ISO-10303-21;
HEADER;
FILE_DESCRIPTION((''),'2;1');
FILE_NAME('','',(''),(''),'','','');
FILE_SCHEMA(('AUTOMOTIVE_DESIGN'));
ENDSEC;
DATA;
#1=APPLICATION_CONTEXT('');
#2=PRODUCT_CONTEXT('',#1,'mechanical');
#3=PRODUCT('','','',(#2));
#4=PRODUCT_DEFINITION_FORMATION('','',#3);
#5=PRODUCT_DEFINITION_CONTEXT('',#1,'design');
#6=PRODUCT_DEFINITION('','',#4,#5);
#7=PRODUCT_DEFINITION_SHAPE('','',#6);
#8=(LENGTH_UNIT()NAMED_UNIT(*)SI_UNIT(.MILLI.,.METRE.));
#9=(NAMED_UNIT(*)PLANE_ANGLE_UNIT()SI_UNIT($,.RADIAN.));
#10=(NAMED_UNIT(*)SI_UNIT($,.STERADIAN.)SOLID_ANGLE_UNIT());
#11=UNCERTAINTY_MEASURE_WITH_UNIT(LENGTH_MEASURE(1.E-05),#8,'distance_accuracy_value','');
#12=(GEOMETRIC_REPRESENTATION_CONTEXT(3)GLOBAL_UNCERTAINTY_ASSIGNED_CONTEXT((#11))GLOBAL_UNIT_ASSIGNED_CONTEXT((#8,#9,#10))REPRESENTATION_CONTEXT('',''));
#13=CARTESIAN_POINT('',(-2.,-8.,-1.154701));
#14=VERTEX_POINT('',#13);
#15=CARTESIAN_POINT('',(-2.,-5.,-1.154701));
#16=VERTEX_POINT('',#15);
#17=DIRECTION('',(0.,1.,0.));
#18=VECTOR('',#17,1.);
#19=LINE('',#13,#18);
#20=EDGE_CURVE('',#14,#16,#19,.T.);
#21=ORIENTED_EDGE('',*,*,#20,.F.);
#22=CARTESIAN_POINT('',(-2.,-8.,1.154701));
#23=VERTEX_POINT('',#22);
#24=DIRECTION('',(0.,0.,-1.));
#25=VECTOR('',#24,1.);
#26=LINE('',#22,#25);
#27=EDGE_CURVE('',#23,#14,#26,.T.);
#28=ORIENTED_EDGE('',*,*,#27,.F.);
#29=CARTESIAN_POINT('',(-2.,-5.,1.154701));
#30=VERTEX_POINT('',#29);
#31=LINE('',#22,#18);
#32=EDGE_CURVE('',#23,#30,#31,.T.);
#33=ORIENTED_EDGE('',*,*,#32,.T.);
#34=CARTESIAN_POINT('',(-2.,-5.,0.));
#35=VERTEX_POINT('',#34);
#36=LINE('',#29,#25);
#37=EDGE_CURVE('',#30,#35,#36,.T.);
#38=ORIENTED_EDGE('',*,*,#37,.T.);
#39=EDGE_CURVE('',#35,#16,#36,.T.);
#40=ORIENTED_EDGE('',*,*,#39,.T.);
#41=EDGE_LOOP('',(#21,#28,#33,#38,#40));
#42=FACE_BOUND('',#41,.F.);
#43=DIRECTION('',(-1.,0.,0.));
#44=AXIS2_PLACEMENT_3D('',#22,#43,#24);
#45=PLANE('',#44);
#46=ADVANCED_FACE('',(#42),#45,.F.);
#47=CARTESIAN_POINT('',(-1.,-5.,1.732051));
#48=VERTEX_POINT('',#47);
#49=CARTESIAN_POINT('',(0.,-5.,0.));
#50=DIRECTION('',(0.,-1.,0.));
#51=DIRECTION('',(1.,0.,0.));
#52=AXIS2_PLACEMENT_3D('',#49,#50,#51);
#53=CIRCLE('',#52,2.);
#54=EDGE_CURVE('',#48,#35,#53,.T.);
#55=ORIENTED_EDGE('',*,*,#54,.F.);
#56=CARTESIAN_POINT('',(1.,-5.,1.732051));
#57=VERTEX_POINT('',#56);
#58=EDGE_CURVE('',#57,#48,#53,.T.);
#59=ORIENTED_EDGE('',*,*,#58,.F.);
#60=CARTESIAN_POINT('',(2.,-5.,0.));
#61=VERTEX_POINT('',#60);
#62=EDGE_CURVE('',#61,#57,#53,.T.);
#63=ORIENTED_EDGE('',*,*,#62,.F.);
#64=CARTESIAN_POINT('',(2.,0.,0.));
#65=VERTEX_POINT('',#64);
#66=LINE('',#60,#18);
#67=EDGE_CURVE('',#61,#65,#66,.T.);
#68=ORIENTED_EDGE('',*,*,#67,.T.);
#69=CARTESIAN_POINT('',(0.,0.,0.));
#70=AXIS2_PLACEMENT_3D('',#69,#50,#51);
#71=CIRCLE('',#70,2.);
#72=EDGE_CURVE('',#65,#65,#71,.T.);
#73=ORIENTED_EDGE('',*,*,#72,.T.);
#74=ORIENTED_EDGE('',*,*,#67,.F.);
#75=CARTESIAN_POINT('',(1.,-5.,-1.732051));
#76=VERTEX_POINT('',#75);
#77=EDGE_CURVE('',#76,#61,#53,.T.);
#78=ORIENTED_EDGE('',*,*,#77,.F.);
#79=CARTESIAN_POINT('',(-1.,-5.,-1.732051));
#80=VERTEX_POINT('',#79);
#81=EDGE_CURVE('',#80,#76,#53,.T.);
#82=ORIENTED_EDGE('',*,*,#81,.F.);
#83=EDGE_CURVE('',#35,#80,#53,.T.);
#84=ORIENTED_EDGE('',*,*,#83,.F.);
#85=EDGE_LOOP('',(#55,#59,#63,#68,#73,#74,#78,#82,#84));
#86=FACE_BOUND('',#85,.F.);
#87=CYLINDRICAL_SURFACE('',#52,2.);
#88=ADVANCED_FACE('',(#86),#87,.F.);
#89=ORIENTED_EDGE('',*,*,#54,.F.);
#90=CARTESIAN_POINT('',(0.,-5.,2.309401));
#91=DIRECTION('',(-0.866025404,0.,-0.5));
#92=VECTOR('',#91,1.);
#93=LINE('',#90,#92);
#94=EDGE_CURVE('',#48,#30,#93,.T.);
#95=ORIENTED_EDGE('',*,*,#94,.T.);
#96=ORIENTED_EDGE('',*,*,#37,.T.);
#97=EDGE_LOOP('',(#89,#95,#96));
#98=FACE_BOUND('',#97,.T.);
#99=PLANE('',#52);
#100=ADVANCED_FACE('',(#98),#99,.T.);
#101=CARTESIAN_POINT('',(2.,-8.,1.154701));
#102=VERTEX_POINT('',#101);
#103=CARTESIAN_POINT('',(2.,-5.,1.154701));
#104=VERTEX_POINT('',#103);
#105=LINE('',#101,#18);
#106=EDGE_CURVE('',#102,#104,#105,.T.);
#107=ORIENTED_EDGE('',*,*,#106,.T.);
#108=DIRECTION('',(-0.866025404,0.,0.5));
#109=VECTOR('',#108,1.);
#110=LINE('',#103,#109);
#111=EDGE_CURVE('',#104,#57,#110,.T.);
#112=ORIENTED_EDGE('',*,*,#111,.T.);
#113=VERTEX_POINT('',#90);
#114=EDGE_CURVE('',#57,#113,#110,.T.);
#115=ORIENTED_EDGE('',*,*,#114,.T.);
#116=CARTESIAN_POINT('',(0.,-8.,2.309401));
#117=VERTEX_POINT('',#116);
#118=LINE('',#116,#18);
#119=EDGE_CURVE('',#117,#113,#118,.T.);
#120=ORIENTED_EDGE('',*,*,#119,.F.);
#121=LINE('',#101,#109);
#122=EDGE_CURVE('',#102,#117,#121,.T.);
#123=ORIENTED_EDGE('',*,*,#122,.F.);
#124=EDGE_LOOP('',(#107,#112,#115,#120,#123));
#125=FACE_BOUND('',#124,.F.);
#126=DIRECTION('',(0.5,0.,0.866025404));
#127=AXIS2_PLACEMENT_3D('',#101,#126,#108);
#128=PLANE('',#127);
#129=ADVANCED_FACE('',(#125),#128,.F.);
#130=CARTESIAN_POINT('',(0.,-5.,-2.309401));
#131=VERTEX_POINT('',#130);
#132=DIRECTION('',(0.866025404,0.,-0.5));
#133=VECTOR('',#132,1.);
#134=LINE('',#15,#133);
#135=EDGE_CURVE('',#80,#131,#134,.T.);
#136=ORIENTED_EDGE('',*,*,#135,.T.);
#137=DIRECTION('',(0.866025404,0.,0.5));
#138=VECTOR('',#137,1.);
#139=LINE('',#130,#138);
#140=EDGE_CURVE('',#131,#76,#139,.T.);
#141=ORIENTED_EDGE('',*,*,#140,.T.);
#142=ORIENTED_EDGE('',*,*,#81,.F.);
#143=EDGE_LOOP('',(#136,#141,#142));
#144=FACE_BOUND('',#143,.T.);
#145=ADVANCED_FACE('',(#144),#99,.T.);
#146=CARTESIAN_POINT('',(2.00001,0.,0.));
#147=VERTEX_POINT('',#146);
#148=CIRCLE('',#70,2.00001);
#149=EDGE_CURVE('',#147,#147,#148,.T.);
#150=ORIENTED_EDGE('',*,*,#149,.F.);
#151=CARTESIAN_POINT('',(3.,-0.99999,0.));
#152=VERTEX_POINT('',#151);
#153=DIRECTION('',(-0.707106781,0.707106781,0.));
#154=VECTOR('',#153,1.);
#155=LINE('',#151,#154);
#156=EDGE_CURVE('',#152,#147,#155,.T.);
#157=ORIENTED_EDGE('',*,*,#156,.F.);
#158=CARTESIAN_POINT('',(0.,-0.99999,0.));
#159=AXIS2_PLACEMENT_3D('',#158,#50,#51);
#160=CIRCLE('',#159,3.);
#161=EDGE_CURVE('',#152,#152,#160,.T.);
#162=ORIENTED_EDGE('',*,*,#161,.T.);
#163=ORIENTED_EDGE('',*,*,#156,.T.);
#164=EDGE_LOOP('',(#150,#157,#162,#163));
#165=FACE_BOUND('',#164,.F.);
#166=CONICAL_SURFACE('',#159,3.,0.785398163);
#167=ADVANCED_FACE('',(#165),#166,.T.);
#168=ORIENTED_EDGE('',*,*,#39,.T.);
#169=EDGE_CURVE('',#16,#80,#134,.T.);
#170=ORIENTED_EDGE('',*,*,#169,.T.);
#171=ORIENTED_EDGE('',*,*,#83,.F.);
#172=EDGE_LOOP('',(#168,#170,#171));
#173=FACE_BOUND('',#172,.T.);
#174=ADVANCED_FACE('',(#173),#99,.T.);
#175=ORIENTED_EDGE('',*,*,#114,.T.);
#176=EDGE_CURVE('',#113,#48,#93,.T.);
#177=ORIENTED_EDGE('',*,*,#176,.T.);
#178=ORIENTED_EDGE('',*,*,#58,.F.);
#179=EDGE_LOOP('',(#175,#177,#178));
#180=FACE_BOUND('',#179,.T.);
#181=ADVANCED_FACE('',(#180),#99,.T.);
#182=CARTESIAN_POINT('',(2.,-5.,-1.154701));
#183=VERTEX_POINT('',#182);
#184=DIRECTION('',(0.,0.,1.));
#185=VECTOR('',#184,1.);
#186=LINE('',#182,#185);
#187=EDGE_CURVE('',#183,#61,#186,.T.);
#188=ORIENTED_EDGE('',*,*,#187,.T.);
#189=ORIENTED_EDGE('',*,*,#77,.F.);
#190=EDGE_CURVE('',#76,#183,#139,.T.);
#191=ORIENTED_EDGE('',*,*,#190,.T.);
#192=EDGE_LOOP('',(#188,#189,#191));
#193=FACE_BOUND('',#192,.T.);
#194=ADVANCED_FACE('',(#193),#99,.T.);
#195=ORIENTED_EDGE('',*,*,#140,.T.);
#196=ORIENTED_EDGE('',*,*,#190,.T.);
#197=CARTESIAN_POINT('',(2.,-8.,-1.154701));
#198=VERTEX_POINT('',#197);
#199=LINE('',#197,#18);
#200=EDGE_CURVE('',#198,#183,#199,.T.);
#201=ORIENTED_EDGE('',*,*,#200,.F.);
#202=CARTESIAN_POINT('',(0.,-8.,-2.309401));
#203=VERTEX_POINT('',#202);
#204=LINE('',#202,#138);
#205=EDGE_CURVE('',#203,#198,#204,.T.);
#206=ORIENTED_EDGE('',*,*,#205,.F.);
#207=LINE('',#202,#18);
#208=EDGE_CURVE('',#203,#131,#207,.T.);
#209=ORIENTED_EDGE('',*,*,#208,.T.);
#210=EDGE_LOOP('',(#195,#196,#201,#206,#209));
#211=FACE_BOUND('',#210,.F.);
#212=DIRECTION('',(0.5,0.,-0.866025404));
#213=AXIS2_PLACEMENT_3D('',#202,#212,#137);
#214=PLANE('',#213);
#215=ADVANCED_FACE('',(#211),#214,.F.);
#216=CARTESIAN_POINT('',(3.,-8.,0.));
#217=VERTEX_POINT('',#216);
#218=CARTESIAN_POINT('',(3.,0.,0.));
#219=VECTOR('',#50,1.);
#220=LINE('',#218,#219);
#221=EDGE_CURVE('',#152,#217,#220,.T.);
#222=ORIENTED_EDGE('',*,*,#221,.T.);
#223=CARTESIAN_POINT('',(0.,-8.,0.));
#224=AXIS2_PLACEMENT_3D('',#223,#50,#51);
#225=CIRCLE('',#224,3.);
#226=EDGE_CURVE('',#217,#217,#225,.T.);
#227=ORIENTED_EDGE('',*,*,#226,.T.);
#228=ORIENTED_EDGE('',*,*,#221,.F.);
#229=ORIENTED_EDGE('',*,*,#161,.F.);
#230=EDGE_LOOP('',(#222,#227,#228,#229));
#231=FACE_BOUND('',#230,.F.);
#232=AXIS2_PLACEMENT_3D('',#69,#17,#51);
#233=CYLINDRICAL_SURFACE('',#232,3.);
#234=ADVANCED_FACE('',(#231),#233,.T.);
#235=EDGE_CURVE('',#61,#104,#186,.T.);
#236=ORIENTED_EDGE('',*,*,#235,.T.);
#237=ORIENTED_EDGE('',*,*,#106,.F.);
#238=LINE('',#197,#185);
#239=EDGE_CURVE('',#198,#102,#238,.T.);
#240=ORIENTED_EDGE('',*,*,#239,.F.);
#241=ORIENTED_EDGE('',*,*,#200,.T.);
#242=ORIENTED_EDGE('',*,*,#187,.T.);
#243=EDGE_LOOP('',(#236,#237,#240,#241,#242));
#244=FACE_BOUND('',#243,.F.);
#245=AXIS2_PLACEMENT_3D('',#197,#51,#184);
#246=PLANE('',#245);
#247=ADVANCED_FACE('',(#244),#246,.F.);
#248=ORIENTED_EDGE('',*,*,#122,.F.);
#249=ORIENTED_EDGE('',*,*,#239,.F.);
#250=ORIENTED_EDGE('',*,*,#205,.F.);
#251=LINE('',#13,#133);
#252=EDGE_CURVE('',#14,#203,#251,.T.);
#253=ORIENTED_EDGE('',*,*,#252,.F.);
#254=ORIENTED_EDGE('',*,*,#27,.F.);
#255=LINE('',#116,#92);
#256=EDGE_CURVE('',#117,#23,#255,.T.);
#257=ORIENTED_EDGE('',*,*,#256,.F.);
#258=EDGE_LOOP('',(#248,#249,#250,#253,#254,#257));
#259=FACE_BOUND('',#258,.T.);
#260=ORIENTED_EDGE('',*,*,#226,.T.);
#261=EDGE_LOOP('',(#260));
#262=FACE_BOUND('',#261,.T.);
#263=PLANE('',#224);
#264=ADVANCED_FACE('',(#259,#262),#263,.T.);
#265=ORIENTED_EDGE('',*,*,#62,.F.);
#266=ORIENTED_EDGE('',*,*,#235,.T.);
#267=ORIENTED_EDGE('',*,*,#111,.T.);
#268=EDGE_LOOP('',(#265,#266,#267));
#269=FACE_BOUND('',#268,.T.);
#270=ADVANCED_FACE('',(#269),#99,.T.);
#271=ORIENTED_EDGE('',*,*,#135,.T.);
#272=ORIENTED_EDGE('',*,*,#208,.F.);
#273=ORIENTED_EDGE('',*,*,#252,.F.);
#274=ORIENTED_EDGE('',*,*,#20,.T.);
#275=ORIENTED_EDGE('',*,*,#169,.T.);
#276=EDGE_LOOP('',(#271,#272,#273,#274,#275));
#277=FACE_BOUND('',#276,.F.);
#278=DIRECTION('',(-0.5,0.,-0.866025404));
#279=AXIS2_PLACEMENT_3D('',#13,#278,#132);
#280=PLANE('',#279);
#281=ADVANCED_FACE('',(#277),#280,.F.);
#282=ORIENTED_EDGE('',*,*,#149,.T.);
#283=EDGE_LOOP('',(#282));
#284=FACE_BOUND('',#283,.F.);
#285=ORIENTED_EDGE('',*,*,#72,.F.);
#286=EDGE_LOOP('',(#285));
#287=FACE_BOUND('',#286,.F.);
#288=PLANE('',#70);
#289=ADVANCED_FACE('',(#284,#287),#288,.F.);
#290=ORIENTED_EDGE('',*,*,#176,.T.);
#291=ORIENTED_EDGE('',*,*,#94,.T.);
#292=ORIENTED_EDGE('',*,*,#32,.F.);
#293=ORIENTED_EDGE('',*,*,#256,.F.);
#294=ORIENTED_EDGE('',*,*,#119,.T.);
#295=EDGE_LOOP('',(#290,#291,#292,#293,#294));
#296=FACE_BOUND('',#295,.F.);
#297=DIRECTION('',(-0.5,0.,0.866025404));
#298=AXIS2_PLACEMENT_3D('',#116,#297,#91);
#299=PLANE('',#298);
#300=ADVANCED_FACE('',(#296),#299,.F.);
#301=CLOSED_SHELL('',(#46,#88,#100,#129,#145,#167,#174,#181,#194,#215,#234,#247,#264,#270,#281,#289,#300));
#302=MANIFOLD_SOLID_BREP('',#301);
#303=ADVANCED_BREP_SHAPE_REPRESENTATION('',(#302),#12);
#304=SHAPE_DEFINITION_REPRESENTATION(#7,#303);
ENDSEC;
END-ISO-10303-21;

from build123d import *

# Parameters (mm, degrees)
F0_R     = 3
F1_DEPTH = 8
F3_DEPTH = 3
F4_R     = 2
F5_DEPTH = 25
F6_SIZE  = 0.99999


# Not quite as in the source:
# - a fillet or chamfer is up to 0.001 mm smaller than in the source, because OpenCascade refuses the exact size


with BuildPart() as f1:
    # F0 (on Front) → F1 (new body)
    with BuildSketch(Plane.XZ):
        Circle(F0_R)
    extrude(amount=F1_DEPTH)

    # F2 (on face) → F3 (cut)
    with BuildSketch(Plane.XZ.offset(8)):
        Polygon((2, 1.1547005384), (0, 2.3094010768), (-2, 1.1547005384), (-2, -1.1547005384), (0, -2.3094010768), (2, -1.1547005384), align=None)
    extrude(amount=-F3_DEPTH, mode=Mode.SUBTRACT)

    # F4 (on face) → F5 (cut)
    with BuildSketch(Plane.XZ.offset(5)):
        Circle(F4_R)
    extrude(amount=-F5_DEPTH, mode=Mode.SUBTRACT)

    # F6 (size 1 in the source; OpenCascade refuses exactly that, so slightly less here)
    f6_edges = [f1.edges().sort_by_distance(p)[0] for p in [
        (-3, 0, 0),
    ]]
    chamfer(f6_edges, length=F6_SIZE)


solid = f1.part
